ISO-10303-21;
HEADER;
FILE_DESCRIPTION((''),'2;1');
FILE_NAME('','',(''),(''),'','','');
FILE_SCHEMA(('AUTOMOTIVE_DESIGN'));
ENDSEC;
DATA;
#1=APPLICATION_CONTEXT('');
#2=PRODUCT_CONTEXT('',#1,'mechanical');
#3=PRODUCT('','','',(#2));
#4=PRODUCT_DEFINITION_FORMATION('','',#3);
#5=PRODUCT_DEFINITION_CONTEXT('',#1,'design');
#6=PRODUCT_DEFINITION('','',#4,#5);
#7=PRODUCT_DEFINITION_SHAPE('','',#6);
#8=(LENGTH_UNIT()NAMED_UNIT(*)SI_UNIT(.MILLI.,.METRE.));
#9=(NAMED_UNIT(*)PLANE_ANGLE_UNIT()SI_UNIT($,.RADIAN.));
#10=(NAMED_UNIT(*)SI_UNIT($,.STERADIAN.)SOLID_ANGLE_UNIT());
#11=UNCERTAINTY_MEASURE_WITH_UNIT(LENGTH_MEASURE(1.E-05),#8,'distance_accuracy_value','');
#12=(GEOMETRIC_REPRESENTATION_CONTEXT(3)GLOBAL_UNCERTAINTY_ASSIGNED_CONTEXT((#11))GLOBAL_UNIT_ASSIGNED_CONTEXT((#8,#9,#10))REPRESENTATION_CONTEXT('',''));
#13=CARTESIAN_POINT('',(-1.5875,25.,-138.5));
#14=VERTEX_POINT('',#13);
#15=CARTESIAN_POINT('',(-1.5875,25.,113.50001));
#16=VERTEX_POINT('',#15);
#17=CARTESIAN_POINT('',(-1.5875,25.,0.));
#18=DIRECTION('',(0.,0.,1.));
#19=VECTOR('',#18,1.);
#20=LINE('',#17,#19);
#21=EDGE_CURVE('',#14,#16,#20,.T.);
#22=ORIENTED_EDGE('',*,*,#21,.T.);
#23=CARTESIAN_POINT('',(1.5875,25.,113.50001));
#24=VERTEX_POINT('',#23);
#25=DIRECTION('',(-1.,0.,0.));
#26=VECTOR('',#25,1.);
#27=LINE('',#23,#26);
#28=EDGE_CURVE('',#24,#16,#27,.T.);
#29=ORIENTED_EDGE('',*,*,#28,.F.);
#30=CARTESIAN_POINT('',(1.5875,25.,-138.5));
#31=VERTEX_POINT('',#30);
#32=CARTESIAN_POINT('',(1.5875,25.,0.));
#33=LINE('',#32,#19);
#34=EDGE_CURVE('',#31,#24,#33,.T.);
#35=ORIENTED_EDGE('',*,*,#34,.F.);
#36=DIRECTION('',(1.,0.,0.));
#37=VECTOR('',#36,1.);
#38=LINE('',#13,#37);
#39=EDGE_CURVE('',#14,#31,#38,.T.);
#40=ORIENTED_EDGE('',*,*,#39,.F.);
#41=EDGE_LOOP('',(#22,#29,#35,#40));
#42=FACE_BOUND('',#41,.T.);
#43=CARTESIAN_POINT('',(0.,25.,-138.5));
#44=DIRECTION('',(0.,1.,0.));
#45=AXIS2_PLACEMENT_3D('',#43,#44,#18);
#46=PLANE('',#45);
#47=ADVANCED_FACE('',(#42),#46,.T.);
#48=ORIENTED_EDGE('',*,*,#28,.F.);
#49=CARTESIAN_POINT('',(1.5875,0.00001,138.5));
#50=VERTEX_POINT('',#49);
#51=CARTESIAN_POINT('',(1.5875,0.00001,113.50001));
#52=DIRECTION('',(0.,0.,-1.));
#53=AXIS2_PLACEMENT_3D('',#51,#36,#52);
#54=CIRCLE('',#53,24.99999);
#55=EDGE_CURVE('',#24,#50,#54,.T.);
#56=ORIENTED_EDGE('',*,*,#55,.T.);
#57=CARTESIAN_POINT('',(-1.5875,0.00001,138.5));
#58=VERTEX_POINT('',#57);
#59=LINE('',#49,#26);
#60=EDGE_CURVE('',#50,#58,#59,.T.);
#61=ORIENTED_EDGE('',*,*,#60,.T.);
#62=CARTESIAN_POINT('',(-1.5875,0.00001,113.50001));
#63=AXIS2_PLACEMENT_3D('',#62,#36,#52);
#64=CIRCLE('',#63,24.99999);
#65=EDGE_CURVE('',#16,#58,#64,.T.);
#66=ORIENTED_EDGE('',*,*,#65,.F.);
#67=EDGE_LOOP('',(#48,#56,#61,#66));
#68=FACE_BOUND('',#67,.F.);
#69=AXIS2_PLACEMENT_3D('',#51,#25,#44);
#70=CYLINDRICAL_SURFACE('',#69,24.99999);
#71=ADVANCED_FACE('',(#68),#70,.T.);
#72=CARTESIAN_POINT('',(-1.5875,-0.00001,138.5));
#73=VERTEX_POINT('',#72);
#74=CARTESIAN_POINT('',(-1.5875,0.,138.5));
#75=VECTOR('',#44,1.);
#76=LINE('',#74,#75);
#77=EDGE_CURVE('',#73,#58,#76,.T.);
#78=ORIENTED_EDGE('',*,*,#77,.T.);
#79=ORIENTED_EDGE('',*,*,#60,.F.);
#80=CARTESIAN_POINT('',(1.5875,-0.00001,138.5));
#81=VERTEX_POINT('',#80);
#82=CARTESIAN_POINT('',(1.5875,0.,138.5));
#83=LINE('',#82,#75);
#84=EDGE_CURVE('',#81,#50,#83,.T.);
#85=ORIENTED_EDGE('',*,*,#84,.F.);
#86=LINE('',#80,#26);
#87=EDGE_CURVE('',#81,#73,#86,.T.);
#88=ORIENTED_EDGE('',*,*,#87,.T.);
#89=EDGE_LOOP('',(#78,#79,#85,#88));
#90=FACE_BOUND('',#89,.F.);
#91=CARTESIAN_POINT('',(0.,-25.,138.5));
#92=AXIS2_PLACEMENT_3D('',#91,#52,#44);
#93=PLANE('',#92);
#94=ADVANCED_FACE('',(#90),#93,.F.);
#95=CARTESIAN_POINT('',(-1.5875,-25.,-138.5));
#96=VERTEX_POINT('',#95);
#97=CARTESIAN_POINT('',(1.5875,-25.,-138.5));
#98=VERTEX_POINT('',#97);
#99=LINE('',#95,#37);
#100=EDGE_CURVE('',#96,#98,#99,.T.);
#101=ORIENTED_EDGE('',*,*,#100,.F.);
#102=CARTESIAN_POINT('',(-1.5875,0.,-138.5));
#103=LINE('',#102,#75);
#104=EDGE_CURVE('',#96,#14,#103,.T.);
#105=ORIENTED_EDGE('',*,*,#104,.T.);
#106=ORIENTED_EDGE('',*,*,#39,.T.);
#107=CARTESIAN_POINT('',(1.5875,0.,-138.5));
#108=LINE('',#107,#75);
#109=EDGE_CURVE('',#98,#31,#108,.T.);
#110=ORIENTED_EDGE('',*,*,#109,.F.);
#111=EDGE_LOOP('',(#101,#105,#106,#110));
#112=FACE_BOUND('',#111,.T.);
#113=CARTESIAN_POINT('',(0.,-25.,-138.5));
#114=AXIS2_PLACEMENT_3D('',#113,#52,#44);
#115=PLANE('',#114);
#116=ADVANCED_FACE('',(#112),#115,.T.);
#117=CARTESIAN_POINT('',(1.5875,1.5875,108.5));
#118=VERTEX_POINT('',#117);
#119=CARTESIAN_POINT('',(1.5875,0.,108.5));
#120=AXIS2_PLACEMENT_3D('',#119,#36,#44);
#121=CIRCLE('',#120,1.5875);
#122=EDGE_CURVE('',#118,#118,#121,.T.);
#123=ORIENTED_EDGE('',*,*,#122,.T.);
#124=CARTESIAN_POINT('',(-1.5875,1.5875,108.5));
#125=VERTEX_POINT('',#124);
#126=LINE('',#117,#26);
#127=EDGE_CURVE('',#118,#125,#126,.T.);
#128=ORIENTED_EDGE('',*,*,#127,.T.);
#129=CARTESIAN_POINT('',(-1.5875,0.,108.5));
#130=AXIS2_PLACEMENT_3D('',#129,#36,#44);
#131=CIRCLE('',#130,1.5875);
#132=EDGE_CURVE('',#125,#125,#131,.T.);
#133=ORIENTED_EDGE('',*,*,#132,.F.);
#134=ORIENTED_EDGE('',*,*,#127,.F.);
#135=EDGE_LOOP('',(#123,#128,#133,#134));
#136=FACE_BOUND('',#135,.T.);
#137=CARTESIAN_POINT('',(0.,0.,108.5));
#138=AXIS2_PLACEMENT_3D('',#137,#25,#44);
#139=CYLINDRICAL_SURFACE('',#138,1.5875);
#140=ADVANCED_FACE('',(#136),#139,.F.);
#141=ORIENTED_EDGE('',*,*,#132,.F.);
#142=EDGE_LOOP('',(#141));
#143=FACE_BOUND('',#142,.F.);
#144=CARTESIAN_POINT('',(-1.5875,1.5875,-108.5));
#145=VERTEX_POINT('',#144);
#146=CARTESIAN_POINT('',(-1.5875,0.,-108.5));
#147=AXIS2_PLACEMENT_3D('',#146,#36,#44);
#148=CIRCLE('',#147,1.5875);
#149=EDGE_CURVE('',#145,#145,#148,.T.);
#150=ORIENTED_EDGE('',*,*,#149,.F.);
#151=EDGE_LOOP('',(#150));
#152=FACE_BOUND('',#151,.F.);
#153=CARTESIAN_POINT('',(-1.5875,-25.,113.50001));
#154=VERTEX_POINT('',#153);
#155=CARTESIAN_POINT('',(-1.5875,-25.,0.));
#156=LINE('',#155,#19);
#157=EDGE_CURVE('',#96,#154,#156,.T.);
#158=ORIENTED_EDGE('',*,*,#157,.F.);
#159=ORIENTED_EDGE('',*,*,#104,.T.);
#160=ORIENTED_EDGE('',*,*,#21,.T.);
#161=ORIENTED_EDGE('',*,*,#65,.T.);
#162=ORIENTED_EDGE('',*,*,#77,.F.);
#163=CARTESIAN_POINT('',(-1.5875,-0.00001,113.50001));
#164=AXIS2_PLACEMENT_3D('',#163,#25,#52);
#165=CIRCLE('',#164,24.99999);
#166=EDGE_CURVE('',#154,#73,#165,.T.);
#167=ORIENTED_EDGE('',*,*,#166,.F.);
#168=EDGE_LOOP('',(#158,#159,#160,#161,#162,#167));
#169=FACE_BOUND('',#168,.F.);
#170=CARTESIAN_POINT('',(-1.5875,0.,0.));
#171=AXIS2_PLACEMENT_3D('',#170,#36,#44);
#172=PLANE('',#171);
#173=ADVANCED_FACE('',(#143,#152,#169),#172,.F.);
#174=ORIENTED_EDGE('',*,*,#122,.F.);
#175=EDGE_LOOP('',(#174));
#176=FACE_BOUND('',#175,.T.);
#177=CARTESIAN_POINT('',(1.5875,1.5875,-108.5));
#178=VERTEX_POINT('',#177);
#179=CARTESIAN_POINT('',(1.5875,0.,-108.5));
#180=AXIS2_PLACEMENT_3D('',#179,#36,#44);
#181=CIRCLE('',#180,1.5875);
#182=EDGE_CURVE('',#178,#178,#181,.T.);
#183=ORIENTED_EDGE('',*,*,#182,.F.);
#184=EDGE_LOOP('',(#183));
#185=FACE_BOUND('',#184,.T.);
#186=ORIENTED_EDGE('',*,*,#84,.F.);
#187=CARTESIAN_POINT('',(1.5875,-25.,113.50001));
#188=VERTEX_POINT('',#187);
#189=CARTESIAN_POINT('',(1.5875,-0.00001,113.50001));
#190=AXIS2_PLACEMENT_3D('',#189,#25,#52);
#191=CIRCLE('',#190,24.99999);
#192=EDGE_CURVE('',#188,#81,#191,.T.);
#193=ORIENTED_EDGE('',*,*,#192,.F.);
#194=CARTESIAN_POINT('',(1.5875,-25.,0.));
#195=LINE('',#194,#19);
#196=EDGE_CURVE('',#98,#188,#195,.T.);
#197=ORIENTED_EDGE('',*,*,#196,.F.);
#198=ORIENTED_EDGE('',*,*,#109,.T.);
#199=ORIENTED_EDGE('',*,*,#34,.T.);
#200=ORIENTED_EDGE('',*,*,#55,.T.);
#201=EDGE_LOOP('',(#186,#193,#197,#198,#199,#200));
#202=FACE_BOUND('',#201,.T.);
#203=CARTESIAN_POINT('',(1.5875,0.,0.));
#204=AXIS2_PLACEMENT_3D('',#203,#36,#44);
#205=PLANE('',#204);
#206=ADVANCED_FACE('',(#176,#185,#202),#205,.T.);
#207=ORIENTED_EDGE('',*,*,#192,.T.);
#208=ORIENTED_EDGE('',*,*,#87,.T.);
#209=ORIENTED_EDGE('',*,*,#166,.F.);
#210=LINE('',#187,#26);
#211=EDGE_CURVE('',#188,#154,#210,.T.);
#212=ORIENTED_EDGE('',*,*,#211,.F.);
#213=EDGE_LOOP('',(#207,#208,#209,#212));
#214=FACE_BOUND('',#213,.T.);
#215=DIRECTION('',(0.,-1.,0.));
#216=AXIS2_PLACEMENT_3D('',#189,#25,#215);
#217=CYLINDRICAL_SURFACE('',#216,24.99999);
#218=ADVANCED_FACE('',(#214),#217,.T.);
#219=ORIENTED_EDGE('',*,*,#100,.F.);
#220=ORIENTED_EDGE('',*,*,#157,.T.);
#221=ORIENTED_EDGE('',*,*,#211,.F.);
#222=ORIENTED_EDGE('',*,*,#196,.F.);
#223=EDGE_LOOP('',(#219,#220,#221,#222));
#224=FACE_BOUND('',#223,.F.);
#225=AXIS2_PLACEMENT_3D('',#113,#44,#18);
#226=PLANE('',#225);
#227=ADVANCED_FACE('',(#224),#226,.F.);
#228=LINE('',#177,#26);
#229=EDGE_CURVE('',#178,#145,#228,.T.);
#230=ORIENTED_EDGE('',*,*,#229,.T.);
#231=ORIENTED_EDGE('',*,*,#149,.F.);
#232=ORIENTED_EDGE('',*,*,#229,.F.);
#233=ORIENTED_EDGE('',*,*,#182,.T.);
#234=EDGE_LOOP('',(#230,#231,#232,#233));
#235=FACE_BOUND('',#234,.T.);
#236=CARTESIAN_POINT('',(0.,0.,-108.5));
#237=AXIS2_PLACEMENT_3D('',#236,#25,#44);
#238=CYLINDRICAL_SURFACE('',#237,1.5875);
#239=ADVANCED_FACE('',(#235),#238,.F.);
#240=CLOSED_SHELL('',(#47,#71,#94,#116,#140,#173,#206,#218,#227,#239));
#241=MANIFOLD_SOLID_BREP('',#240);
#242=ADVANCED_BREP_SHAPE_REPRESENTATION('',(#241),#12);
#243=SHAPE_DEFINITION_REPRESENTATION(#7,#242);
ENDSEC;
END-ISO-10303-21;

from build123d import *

# Parameters (mm, degrees)
F1_W     = 50
F1_H     = 277
F1_R     = 1.5875
F2_DEPTH = 1.5875
F3_R     = 24.99999


# Not quite as in the source:
# - a fillet or chamfer is up to 0.001 mm smaller than in the source, because OpenCascade refuses the exact size
# - a length typed as a fraction of an inch, garbled in the dataset ("3 / 203.2 mm" for 3/8 in), is restored


with BuildPart() as f2:
    # F1 (on Right) → F2 (new body, symmetric)
    with BuildSketch(Plane.YZ):
        Rectangle(F1_W, F1_H)
        with Locations((0, -108.5)):
            Circle(F1_R, mode=Mode.SUBTRACT)
        with Locations((0, 108.5)):
            Circle(F1_R, mode=Mode.SUBTRACT)
    extrude(amount=F2_DEPTH, both=True)

    # F3 (radius 25 in the source; OpenCascade refuses exactly that, so slightly less here)
    f3_edges = [f2.edges().sort_by_distance(p)[0] for p in [
        (0, -25, 138.5),
        (0, 25, 138.5),
    ]]
    fillet(f3_edges, radius=F3_R)


solid = f2.part
